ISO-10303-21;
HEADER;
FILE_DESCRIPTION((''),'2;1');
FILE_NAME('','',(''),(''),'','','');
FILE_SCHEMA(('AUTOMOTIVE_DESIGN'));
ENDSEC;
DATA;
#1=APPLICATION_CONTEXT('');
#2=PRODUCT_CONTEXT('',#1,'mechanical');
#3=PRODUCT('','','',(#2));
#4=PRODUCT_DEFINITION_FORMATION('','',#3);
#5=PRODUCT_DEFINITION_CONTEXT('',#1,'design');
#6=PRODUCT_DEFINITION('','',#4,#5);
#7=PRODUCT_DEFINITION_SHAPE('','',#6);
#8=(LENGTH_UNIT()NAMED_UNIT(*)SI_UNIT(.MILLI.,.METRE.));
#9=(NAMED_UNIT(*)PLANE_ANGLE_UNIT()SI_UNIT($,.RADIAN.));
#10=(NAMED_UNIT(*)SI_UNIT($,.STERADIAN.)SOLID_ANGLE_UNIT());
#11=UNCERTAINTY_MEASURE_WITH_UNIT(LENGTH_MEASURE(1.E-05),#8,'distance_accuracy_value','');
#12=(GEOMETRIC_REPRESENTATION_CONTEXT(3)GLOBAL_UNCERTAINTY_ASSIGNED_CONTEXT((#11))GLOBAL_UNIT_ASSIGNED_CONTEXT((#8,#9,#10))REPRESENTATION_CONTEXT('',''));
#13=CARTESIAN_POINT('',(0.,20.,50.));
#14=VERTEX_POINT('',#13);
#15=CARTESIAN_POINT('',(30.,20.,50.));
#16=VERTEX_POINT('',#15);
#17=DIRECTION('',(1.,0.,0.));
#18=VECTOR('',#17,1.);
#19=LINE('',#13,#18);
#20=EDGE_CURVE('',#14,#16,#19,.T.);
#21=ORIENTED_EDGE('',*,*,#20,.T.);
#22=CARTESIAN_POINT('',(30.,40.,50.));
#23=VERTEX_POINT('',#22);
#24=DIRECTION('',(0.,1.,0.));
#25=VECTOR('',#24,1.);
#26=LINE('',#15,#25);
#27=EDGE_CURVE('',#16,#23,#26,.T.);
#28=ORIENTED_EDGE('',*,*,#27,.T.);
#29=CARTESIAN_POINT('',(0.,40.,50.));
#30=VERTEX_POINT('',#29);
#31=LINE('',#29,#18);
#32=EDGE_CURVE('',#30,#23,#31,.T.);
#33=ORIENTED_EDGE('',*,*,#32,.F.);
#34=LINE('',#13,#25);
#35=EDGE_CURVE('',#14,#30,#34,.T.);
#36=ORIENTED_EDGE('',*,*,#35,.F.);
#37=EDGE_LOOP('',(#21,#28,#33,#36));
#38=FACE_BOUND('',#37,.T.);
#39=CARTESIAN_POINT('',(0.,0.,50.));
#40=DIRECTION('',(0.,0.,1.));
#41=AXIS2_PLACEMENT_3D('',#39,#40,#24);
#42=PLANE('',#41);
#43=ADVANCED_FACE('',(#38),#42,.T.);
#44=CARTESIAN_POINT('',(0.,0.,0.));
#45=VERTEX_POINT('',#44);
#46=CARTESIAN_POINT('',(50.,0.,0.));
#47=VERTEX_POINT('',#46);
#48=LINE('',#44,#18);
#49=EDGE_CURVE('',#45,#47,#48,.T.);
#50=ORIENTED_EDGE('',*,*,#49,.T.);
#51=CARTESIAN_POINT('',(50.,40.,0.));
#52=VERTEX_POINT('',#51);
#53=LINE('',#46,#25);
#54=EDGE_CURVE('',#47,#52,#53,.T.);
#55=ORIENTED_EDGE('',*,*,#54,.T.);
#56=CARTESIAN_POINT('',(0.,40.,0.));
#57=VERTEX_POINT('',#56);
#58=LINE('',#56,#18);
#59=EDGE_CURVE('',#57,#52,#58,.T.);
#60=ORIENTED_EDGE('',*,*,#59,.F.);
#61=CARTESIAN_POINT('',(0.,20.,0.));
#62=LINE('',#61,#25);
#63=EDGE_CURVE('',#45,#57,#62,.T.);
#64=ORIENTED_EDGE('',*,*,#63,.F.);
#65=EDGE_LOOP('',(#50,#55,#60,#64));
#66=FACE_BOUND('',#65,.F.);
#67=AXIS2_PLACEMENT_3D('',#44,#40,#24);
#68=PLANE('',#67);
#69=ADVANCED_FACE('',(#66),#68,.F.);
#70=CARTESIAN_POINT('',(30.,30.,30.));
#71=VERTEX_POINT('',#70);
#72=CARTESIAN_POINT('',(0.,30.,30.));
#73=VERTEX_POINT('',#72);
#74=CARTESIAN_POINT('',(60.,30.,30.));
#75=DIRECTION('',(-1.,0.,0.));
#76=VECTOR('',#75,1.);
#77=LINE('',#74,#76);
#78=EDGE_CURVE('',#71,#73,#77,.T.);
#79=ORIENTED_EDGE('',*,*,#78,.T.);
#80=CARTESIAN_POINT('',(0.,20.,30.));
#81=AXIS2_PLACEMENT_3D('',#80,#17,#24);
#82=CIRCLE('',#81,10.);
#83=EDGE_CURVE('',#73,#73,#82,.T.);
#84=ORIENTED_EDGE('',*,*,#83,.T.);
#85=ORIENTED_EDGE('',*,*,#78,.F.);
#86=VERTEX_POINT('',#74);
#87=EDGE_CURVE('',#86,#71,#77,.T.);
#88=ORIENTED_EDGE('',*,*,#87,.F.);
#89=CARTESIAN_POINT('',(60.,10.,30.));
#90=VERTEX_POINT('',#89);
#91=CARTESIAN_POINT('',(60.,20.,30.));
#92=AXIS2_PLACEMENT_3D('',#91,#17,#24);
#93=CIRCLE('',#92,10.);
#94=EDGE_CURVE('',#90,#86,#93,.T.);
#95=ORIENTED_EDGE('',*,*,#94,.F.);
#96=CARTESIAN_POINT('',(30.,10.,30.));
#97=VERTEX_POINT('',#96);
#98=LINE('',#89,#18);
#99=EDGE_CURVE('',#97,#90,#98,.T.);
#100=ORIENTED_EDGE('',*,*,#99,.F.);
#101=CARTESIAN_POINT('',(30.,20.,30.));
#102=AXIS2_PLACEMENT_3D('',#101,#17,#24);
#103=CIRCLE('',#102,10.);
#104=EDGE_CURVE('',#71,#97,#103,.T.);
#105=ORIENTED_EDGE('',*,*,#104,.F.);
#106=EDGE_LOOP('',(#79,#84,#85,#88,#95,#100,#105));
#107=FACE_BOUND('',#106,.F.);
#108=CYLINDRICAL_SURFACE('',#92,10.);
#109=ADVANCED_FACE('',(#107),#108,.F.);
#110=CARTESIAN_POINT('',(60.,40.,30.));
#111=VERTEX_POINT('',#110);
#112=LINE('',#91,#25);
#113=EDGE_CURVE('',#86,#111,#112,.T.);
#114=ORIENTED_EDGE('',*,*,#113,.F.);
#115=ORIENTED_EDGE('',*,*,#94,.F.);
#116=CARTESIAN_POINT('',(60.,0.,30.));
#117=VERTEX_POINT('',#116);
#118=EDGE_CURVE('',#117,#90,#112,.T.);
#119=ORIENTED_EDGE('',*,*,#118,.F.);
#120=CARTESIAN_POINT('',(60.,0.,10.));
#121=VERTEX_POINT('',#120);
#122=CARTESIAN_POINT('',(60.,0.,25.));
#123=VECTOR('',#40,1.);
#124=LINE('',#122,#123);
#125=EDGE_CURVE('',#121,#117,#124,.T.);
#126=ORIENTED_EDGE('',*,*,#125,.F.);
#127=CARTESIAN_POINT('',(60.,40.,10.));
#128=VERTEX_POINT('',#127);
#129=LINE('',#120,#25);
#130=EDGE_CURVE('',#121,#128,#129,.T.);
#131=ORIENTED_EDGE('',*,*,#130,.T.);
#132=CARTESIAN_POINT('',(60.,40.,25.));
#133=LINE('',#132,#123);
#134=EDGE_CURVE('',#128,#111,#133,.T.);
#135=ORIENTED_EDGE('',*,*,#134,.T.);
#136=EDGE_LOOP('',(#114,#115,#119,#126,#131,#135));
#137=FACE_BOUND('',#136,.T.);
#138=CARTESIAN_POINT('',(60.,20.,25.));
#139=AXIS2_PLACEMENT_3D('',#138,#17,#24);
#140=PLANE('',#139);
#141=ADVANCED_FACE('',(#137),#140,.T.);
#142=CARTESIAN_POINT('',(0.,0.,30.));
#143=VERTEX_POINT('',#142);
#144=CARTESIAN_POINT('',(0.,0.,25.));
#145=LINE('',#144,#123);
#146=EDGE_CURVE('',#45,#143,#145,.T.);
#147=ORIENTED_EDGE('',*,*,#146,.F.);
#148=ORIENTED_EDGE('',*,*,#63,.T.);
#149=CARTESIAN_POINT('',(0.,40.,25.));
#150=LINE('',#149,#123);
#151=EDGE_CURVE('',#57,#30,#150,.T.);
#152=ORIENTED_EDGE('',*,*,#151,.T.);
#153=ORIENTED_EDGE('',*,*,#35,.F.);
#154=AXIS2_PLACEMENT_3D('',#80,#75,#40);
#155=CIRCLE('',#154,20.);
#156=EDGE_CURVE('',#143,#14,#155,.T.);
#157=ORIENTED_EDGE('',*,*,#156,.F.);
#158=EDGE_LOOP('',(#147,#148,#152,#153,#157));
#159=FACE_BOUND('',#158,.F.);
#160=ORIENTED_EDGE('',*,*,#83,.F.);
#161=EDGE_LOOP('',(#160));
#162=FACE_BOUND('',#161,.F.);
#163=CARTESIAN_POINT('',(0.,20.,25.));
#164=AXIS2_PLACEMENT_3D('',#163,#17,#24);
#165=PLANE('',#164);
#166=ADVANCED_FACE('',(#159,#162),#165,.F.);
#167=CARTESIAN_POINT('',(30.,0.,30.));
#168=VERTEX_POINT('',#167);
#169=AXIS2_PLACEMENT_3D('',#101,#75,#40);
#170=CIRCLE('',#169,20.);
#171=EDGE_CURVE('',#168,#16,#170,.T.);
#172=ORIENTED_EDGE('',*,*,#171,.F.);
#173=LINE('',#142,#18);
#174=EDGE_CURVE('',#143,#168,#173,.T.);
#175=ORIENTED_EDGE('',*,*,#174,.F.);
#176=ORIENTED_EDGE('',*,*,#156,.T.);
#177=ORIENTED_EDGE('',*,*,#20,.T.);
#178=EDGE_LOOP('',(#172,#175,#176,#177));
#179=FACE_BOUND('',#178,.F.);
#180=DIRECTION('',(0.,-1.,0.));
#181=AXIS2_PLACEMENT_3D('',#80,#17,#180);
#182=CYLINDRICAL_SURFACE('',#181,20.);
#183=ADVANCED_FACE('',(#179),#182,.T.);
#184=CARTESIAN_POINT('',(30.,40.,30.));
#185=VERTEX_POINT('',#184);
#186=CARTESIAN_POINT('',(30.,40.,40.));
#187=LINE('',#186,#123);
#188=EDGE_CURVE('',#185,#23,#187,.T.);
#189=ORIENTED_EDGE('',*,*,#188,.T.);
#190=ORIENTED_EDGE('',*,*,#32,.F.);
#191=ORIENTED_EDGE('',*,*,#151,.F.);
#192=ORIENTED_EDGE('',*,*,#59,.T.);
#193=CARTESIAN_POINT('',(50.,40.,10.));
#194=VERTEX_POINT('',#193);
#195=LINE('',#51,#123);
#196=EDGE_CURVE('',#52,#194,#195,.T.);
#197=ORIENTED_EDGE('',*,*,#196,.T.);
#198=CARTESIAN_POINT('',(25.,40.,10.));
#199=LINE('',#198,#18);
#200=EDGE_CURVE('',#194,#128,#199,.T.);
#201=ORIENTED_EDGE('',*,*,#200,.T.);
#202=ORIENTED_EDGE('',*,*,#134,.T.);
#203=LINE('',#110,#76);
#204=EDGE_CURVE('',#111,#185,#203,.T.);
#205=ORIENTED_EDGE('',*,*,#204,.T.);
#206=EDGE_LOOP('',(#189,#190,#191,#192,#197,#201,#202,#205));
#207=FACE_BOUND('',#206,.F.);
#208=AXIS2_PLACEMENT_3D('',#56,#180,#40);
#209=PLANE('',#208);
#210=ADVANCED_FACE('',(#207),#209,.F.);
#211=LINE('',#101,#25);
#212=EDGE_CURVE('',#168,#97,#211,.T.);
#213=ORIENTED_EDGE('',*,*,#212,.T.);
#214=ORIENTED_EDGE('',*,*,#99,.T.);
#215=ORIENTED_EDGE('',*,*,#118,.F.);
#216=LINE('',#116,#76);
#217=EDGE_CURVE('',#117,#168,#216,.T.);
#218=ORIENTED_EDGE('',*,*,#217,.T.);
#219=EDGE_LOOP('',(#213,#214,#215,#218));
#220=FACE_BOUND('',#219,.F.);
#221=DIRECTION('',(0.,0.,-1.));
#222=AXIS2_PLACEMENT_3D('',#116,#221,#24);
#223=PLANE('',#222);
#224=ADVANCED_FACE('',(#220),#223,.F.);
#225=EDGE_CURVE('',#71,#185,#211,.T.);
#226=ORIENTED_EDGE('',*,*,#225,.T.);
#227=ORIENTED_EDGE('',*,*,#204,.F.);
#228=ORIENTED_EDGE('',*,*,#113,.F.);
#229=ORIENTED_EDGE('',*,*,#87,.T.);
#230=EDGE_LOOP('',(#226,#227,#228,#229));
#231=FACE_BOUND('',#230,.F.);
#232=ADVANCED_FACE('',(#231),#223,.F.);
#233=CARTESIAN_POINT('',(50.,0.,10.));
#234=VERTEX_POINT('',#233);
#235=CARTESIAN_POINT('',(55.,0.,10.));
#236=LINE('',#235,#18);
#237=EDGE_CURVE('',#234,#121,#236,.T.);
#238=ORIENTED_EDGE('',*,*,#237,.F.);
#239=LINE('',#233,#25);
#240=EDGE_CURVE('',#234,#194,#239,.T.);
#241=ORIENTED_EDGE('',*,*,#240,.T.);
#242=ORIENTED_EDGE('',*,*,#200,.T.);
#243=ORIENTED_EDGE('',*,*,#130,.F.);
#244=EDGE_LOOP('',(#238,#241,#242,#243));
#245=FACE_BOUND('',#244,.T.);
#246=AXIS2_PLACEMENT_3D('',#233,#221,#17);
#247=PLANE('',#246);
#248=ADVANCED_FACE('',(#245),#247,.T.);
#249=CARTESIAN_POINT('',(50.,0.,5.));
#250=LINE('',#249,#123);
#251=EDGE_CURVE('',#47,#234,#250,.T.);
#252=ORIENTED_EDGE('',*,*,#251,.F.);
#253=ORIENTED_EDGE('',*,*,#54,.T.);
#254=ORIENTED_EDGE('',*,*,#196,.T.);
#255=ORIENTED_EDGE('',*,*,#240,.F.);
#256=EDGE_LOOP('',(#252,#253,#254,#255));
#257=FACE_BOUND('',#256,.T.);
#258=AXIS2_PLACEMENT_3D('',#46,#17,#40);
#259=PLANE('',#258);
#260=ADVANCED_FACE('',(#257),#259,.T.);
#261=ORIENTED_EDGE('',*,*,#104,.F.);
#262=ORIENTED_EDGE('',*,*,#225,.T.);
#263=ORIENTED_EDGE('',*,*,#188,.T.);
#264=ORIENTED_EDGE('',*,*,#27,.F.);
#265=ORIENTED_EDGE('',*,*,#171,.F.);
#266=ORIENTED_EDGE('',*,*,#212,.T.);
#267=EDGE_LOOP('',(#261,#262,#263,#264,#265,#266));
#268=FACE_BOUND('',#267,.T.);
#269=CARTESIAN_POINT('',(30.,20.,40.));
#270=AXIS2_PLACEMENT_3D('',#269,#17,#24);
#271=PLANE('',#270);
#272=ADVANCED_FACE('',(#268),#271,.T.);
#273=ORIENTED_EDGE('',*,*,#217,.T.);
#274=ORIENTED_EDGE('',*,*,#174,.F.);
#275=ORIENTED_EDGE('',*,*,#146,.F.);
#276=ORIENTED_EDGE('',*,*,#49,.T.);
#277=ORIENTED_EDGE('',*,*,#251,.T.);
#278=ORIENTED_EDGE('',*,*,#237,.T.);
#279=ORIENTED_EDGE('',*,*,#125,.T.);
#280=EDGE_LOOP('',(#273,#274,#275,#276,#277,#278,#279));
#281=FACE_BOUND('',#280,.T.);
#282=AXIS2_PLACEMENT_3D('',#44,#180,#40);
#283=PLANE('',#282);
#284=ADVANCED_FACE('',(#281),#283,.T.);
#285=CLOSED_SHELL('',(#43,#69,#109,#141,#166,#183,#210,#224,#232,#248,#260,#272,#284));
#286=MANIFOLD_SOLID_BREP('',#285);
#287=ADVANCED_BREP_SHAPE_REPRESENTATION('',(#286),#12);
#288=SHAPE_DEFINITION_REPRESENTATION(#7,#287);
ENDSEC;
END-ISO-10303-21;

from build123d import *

# Parameters (mm, degrees)
F0_W     = 40
F0_H     = 50
F1_DEPTH = 60
F2_W     = 40
F2_H     = 20
F3_DEPTH = 30
F5_DEPTH = 60.001
F6_W     = 10
F6_H     = 10
F7_DEPTH = 40.001
F8_R     = 20


with BuildPart() as f1:
    # F0 (on Right) → F1 (new body)
    with BuildSketch(Plane.YZ):
        with Locations((20, 25)):
            Rectangle(F0_W, F0_H)
    extrude(amount=F1_DEPTH)

    # F2 (on face) → F3 (cut)
    with BuildSketch(Plane.YZ.offset(60)):
        with Locations((20, 40)):
            Rectangle(F2_W, F2_H)
    extrude(amount=-F3_DEPTH, mode=Mode.SUBTRACT)

    # F4 (on face) → F5 (cut, through all)
    with BuildSketch(Plane.YZ.offset(60)):
        with BuildLine():
            ThreePointArc((10, 30), (20, 20), (30, 30))
            Line((30, 30), (10, 30))
        make_face()
        with BuildLine():
            Line((10, 30), (30, 30))
            ThreePointArc((30, 30), (20, 40), (10, 30))
        make_face()
    extrude(amount=-F5_DEPTH, mode=Mode.SUBTRACT)

    # F6 (on face) → F7 (cut, through all)
    with BuildSketch(Plane.XZ):
        with Locations((55, 5)):
            Rectangle(F6_W, F6_H)
    extrude(amount=-F7_DEPTH, mode=Mode.SUBTRACT)

    # F8
    f8_edges = [f1.edges().sort_by_distance(p)[0] for p in [
        (15, 0, 50),
    ]]
    fillet(f8_edges, radius=F8_R)


solid = f1.part
